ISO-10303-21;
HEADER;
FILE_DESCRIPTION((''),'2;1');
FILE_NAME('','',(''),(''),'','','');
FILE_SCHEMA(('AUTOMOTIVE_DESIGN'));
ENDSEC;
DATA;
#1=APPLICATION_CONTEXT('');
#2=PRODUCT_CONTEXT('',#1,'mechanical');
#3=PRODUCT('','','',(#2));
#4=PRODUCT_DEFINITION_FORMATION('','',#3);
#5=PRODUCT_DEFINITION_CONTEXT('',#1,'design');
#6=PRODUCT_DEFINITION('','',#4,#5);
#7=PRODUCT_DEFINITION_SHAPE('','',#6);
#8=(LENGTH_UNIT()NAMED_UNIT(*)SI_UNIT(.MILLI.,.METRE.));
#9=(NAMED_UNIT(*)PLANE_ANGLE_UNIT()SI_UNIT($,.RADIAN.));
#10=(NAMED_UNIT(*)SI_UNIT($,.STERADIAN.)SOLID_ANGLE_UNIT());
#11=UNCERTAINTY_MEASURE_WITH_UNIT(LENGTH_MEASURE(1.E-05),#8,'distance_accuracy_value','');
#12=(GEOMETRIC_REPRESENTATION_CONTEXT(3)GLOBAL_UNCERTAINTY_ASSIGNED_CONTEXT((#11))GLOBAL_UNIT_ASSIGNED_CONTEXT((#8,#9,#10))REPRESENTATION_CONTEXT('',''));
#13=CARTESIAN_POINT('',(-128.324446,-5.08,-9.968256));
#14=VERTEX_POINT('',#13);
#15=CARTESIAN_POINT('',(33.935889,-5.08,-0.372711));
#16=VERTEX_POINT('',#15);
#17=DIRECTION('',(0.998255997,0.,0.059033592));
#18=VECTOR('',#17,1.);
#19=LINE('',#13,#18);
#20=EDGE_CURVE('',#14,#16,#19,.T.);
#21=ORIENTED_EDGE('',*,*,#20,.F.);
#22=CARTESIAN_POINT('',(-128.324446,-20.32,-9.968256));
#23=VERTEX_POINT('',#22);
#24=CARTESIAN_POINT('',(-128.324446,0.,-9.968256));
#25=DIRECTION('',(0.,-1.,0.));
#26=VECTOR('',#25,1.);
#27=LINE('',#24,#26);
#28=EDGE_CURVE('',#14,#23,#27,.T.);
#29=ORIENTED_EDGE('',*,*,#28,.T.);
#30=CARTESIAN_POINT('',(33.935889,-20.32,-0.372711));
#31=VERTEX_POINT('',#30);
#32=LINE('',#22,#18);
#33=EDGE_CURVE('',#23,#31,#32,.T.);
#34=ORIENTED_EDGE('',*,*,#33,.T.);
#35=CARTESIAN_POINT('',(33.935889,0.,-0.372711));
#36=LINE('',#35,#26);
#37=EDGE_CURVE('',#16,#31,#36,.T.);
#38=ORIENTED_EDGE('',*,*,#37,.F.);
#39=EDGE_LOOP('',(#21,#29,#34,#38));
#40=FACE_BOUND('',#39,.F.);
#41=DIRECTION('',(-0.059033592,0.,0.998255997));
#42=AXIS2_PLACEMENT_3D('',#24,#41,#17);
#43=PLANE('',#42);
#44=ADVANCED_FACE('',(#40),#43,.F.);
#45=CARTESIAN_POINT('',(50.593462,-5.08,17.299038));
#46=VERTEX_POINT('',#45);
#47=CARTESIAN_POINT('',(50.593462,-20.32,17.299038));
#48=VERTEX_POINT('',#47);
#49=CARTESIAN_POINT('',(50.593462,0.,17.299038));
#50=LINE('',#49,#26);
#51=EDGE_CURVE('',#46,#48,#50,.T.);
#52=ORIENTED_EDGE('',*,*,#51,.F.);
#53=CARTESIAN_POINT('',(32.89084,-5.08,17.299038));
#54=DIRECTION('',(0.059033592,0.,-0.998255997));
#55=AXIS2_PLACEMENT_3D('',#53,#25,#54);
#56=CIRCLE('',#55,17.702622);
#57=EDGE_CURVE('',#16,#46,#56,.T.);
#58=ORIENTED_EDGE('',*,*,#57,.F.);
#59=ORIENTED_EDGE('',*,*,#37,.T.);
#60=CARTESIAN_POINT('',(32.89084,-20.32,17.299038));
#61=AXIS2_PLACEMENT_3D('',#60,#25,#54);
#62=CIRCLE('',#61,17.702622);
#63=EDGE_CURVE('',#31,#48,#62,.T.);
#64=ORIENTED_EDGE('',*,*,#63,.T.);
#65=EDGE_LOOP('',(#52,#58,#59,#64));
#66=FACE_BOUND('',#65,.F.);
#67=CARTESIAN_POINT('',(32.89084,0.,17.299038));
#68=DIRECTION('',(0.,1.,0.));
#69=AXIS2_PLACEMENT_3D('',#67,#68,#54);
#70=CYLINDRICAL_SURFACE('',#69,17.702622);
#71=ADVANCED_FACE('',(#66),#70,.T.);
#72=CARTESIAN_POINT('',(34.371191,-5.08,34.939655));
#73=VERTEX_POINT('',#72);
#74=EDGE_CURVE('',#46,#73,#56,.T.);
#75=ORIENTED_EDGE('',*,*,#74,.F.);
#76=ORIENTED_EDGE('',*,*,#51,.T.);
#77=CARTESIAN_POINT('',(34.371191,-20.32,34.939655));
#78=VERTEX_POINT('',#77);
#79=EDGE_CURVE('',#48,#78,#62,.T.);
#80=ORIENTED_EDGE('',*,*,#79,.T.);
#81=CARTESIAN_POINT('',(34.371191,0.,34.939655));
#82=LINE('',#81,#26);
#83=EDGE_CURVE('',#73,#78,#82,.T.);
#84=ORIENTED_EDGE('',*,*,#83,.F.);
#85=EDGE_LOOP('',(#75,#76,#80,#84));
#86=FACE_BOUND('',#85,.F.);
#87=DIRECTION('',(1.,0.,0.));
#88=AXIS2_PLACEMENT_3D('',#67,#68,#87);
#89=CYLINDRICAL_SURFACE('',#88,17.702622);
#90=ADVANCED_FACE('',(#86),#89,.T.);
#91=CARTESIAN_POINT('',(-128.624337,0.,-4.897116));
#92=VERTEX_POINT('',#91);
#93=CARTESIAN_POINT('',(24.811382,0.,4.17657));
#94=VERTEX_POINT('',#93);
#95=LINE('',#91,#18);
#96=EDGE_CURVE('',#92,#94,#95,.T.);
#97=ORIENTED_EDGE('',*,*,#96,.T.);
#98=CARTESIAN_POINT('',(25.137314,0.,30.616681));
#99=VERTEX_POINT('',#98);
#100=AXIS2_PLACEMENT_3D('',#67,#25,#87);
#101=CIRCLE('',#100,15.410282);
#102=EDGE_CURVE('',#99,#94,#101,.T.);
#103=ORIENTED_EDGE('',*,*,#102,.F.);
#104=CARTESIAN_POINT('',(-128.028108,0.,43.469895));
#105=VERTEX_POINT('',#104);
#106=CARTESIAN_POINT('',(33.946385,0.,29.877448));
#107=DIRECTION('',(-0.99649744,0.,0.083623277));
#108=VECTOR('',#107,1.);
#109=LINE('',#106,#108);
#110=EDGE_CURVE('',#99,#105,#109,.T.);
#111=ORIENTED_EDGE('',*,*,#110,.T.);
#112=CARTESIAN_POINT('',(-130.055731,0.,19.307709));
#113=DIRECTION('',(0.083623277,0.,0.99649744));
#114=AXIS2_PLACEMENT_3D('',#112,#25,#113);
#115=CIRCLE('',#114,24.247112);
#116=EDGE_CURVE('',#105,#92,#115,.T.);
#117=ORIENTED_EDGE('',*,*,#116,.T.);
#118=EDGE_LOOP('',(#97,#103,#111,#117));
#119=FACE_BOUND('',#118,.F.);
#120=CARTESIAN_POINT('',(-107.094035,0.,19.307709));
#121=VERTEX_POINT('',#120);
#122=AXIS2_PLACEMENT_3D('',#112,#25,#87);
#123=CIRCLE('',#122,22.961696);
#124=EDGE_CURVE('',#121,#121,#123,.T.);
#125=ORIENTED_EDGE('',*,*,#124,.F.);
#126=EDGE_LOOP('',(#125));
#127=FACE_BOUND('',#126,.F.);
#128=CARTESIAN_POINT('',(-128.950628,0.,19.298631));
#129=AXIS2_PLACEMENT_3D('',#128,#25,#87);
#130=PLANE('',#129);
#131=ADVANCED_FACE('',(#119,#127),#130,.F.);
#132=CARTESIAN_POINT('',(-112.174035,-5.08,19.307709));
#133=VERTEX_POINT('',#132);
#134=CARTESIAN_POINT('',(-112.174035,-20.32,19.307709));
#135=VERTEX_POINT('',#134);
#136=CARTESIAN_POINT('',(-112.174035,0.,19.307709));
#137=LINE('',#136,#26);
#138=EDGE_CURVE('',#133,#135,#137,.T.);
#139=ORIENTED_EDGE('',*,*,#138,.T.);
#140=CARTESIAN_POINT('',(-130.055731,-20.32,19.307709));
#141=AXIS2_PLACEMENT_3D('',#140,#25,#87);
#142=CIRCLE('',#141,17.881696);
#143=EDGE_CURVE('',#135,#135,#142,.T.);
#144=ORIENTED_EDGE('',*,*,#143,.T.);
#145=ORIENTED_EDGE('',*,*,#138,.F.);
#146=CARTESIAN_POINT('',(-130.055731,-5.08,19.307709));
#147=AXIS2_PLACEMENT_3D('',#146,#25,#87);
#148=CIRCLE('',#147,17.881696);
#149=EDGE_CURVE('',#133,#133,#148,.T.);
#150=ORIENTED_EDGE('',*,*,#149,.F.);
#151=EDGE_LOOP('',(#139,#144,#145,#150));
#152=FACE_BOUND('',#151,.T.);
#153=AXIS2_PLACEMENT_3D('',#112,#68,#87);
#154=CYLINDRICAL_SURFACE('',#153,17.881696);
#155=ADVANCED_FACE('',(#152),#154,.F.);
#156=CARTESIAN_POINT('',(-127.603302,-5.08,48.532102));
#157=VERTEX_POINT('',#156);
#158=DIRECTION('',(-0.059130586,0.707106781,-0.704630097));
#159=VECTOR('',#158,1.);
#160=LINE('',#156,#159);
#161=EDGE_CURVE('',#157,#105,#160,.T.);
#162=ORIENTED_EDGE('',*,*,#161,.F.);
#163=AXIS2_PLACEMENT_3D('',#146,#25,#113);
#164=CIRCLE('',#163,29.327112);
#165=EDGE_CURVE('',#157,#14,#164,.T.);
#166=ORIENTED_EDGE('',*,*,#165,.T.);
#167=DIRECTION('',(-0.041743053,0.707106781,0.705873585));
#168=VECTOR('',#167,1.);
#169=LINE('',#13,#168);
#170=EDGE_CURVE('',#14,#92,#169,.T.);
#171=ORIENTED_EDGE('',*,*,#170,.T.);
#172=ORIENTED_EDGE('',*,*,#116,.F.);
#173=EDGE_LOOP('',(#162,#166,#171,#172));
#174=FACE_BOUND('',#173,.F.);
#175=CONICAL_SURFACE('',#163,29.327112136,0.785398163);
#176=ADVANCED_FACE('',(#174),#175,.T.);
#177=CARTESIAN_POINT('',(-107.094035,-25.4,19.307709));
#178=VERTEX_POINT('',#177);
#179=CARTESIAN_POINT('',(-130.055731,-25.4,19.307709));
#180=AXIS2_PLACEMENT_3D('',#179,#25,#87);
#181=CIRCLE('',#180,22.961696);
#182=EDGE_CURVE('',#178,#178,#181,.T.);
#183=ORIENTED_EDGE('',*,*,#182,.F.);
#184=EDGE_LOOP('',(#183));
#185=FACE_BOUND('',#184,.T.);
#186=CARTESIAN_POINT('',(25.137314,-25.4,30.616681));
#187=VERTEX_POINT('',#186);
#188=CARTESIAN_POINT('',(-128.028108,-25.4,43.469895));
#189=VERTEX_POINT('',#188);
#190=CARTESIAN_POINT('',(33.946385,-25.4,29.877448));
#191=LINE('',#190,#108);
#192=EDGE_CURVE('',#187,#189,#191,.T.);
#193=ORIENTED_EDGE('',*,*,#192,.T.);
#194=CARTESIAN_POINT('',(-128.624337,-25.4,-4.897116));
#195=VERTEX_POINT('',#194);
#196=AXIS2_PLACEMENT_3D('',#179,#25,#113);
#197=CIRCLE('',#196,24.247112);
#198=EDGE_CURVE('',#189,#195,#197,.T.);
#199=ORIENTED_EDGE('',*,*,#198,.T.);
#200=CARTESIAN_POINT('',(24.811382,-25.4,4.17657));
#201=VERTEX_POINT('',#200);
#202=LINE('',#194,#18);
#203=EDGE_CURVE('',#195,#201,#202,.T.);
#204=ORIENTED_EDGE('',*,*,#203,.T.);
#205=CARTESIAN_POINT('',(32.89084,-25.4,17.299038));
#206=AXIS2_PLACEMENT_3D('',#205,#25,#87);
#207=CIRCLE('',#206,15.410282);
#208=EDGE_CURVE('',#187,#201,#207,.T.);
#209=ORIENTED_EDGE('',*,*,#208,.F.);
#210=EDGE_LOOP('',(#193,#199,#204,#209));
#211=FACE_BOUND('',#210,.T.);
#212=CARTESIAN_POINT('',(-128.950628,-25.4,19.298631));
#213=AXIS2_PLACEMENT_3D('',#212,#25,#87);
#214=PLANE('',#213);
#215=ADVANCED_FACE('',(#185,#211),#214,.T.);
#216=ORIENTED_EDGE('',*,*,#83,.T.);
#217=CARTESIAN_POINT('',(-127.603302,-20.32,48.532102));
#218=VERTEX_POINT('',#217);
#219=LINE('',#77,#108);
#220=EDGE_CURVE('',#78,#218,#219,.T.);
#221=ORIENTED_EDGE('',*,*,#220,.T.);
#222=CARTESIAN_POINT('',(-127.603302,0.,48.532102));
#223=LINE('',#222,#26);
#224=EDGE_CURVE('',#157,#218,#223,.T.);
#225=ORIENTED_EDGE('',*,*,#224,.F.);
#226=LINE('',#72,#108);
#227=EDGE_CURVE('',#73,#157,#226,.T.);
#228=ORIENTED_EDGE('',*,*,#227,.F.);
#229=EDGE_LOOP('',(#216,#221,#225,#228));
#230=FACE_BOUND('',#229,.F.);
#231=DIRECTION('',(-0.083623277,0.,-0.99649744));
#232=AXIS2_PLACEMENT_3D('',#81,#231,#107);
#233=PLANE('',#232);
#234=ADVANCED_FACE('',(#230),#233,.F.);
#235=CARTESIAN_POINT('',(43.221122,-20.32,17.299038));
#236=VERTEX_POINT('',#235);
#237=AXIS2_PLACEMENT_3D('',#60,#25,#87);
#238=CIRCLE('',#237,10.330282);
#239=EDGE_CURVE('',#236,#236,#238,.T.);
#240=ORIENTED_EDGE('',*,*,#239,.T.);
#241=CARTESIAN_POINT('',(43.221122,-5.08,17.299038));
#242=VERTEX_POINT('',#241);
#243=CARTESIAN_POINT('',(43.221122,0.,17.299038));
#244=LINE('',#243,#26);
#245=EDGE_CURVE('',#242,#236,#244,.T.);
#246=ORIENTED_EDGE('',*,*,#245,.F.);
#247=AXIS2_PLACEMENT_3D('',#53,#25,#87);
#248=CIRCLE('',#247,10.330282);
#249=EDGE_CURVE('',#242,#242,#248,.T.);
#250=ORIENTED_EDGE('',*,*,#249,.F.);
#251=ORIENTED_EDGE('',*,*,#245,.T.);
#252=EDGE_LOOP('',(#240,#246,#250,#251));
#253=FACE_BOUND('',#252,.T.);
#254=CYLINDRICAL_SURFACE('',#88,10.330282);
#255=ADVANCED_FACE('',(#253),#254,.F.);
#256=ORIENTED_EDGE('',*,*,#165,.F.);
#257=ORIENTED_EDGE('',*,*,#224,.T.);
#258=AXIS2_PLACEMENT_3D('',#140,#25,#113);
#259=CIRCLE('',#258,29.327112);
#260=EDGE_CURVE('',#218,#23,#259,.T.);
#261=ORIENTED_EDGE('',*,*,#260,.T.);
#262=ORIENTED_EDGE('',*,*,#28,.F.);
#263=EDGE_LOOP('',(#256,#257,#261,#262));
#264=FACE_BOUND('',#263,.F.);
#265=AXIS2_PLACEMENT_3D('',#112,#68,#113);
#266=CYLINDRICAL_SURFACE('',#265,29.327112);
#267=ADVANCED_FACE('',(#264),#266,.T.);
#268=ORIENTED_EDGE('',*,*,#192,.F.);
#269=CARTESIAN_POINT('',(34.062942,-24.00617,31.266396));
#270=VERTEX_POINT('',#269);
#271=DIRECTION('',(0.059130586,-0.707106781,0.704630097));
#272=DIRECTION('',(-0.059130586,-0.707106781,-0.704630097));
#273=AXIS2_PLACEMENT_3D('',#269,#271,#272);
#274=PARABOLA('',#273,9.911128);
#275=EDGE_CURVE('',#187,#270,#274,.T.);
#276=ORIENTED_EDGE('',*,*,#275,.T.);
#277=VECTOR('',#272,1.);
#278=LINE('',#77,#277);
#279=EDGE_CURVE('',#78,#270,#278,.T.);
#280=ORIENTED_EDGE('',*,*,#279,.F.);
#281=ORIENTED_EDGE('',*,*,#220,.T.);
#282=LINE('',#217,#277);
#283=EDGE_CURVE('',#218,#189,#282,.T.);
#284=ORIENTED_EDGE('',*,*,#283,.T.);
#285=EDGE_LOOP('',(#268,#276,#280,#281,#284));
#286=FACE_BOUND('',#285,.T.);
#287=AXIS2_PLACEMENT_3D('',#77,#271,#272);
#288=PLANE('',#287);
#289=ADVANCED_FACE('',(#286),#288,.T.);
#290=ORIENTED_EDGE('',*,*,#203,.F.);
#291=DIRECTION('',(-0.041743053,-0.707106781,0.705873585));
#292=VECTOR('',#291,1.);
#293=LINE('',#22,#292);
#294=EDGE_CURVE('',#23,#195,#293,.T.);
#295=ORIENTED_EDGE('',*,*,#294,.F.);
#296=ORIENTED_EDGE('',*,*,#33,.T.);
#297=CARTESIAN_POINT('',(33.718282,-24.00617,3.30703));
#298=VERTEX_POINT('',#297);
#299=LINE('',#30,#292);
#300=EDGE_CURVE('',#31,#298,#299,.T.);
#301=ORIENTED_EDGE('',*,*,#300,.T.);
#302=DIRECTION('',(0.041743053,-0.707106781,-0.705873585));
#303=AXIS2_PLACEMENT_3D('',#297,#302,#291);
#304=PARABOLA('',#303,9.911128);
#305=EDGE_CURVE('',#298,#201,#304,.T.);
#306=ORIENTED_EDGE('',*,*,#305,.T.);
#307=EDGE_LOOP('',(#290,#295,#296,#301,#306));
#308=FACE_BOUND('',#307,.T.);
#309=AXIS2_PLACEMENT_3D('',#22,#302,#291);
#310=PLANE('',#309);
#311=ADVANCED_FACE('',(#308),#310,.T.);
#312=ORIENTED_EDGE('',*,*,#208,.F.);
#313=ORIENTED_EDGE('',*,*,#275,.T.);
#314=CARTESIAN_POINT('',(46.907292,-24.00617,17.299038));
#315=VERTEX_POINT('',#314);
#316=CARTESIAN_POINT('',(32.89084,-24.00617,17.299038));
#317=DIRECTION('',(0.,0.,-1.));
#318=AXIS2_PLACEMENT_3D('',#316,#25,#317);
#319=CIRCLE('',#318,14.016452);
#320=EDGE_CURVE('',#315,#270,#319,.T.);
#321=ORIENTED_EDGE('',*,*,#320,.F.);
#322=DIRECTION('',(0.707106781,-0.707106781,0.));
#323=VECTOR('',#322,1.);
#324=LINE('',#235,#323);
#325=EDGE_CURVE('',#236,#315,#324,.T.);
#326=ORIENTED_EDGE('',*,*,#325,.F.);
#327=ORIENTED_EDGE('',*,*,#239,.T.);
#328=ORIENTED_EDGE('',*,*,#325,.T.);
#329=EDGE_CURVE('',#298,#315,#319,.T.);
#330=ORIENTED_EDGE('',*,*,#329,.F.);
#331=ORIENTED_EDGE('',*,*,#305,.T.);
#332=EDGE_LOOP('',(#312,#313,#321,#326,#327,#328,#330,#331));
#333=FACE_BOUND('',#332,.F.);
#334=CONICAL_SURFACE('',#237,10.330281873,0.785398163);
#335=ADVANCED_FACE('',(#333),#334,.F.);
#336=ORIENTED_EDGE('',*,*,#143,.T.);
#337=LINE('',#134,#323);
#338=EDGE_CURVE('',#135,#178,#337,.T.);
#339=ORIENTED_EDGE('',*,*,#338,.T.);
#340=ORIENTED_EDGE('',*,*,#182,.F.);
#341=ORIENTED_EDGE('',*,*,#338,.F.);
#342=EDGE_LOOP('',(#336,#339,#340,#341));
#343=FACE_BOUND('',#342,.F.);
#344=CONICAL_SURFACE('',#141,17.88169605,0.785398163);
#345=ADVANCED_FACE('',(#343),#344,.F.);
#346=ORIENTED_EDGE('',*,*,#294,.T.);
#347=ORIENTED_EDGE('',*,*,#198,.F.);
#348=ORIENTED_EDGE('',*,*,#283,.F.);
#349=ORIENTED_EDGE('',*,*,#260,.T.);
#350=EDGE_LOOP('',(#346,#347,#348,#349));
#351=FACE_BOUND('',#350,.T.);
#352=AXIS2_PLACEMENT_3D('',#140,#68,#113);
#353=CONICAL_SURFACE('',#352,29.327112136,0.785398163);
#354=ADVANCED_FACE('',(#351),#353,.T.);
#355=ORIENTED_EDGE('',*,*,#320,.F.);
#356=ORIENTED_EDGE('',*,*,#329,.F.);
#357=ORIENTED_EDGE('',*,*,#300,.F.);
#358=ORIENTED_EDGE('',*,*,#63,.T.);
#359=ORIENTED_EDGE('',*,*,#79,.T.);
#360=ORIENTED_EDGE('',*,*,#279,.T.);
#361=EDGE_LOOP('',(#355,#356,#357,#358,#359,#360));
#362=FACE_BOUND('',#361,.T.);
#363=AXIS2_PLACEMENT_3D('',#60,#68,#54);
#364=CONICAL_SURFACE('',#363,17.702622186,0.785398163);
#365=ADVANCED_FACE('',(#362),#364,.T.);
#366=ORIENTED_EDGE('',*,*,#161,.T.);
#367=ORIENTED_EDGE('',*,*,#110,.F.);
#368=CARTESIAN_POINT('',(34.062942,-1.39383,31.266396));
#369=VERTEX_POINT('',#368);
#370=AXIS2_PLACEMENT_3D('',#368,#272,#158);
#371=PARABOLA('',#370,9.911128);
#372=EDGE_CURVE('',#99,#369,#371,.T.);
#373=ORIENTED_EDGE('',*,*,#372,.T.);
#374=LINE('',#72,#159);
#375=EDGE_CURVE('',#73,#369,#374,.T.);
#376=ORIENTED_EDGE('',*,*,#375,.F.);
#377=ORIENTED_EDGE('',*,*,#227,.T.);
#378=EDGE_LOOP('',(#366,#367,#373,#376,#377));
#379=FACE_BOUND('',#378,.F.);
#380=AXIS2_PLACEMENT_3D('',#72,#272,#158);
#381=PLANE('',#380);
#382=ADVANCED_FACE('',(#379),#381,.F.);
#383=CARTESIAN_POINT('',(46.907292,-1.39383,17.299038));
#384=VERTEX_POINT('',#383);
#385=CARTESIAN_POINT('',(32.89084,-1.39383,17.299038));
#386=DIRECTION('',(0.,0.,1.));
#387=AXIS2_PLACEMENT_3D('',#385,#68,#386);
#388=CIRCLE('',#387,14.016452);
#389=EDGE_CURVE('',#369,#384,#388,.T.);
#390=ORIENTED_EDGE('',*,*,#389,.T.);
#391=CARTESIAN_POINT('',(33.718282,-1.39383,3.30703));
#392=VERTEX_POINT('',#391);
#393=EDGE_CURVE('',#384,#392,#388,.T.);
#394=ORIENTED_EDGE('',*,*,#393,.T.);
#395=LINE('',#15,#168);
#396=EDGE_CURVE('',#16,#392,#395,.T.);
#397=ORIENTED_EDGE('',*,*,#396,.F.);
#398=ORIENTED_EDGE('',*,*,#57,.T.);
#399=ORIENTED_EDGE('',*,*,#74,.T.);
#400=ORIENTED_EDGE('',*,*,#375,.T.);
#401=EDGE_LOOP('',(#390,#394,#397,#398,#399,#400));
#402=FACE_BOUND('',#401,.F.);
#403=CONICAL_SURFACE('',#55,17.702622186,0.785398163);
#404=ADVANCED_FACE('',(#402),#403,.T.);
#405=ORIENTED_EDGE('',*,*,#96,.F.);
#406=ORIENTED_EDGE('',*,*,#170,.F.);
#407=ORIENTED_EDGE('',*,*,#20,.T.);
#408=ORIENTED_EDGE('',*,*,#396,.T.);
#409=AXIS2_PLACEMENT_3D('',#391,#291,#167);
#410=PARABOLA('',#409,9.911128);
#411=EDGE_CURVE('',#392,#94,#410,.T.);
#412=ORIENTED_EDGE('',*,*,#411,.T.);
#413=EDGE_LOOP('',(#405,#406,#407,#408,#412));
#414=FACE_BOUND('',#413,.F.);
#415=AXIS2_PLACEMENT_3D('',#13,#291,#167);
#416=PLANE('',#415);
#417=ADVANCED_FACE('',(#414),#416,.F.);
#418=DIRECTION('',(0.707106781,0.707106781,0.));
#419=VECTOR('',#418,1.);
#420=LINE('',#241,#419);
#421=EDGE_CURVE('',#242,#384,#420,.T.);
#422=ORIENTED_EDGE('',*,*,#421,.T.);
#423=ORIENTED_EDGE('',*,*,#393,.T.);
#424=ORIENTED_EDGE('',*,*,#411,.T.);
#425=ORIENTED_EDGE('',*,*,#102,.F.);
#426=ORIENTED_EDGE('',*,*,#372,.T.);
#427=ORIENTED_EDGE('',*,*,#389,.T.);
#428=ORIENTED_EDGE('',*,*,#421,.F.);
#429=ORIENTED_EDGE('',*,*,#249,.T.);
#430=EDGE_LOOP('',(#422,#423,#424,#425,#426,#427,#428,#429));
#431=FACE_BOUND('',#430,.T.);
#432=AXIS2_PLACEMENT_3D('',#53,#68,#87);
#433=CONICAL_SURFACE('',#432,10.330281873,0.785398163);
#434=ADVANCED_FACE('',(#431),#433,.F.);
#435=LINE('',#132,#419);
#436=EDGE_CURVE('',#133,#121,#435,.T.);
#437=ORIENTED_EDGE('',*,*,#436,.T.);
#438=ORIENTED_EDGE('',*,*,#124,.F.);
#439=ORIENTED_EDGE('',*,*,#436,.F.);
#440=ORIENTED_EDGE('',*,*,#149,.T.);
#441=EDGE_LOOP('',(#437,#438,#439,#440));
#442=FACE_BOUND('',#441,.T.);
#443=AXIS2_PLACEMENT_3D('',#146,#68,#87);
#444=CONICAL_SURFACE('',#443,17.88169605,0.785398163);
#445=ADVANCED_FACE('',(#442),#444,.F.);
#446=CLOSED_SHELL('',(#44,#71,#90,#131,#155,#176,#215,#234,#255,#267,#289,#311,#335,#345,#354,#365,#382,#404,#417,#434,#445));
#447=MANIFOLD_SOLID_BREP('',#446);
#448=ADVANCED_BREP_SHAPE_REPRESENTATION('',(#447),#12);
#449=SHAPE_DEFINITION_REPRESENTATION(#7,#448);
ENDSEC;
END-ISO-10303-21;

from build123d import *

# Parameters (mm, degrees)
F0_R         = 17.8816960504
F0_R_2       = 10.3302818728
F1_DEPTH     = 25.4
F2_T1_DEPTH  = 162.5438125483
F2_T3_DEPTH  = 162.5438125483
F2_T6_ANGLE  = 188.1812058846
F2_T8_ANGLE  = 171.8187941154
F2_T10_ANGLE = 188.1812058846
F2_T12_ANGLE = 171.8187941154


# Not quite as in the source:
# - a fillet or chamfer that OpenCascade refuses, or shapes differently, is made with other operations: its cross-section is extruded or revolved along the edge and cut away or added


with BuildPart() as f1:
    # F0 (on Front) → F1 (new body)
    with BuildSketch(Plane.XZ):
        with BuildLine():
            ThreePointArc((-128.3244462029, -9.9682561267), (-108.7150059464, -0.8082782893), (-100.7286188282, 19.3077094309))
            ThreePointArc((-100.7286188282, 19.3077094309), (-108.4686726557, 39.1591179408), (-127.6033017493, 48.5321015922))
            ThreePointArc((-127.6033017493, 48.5321015922), (-159.38061509, 19.669202563), (-128.3244462029, -9.9682561267))
        make_face()
        with Locations((-130.0557309645, 19.3077094309)):
            Circle(F0_R, mode=Mode.SUBTRACT)
        with BuildLine():
            ThreePointArc((-127.6033017493, 48.5321015922), (-108.4686726557, 39.1591179408), (-100.7286188282, 19.3077094309))
            ThreePointArc((-100.7286188282, 19.3077094309), (-108.7150059464, -0.8082782893), (-128.3244462029, -9.9682561267))
            Line((-128.3244462029, -9.9682561267), (33.9358894089, -0.3727110744))
            ThreePointArc((33.9358894089, -0.3727110744), (15.1895627408, 17.5172445164), (34.3711913147, 34.9396553669))
            Line((34.3711913147, 34.9396553669), (-127.6033017493, 48.5321015922))
        make_face()
        with BuildLine():
            ThreePointArc((50.5934622257, 17.2990376807), (45.9213605892, 29.2818740087), (34.3711913147, 34.9396553669))
            ThreePointArc((34.3711913147, 34.9396553669), (15.1895627408, 17.5172445164), (33.9358894089, -0.3727110744))
            ThreePointArc((33.9358894089, -0.3727110744), (45.772667286, 5.1564943288), (50.5934622257, 17.2990376807))
        make_face()
        with Locations((32.89084004, 17.2990376807)):
            Circle(F0_R_2, mode=Mode.SUBTRACT)
    extrude(amount=F1_DEPTH)

    # F2: chamfer of 5.08 on 12 edges, made by hand

    # F2_s2 → F2_t1 (cut)
    with BuildSketch(Plane(origin=(31.219303845, 0, -2.6198366217), x_dir=(0, 1, 0), z_dir=(-0.9964974398, 0, 0.0836232768))):
        Polygon((-20.32, -37.691508766), (-25.4, -32.611508766), (-25.4, -37.691508766), align=None)
        Polygon((-5.08, -37.691508766), (0, -32.611508766), (0, -37.691508766), align=None)
    extrude(amount=F2_T1_DEPTH, mode=Mode.SUBTRACT)

    # F2_s4 → F2_t3 (cut)
    with BuildSketch(Plane(origin=(-128.4646756887, 0, -7.5969803622), x_dir=(0, 1, 0), z_dir=(0.9982559968, 0, 0.0590335916))):
        Polygon((-20.32, -2.3754185022), (-25.4, 2.7045814978), (-25.4, -2.3754185022), align=None)
        Polygon((-5.08, -2.3754185022), (0, 2.7045814978), (0, -2.3754185022), align=None)
    extrude(amount=F2_T3_DEPTH, mode=Mode.SUBTRACT)

    # F2_s5 → F2_t6 (revolve, cut)
    with BuildSketch(Plane(origin=(-130.755189219, 0, 10.9726096036), x_dir=(0, 1, 0), z_dir=(0.9964974398, 0, -0.0836232768))):
        Polygon((-20.32, 37.691508766), (-25.4, 32.611508766), (-25.4, 37.691508766), align=None)
    revolve(axis=Axis((-130.0557309645, -25.4, 19.3077094309), (0, -1, 0)), revolution_arc=F2_T6_ANGLE, mode=Mode.SUBTRACT)

    # F2_s7 → F2_t8 (revolve, cut)
    with BuildSketch(Plane(origin=(33.7956599231, 0, 1.9985646901), x_dir=(0, 1, 0), z_dir=(-0.9982559968, 0, -0.0590335916))):
        Polygon((-20.32, 2.3754185022), (-25.4, -2.7045814978), (-25.4, 2.3754185022), align=None)
    revolve(axis=Axis((32.89084004, -25.4, 17.2990376807), (0, -1, 0)), revolution_arc=F2_T8_ANGLE, mode=Mode.SUBTRACT)

    # F2_s9 → F2_t10 (revolve, cut)
    with BuildSketch(Plane(origin=(-130.755189219, 0, 10.9726096036), x_dir=(0, 1, 0), z_dir=(0.9964974398, 0, -0.0836232768))):
        Polygon((-5.08, 37.691508766), (0, 32.611508766), (0, 37.691508766), align=None)
    revolve(axis=Axis((-130.0557309645, 0, 19.3077094309), (0, -1, 0)), revolution_arc=F2_T10_ANGLE, mode=Mode.SUBTRACT)

    # F2_s11 → F2_t12 (revolve, cut)
    with BuildSketch(Plane(origin=(33.7956599231, 0, 1.9985646901), x_dir=(0, 1, 0), z_dir=(-0.9982559968, 0, -0.0590335916))):
        Polygon((-5.08, 2.3754185022), (0, -2.7045814978), (0, 2.3754185022), align=None)
    revolve(axis=Axis((32.89084004, 0, 17.2990376807), (0, -1, 0)), revolution_arc=F2_T12_ANGLE, mode=Mode.SUBTRACT)

    # F2_s13 → F2_t14 (revolve, cut)
    with BuildSketch(Plane.XY.offset(19.3077094309)):
        Polygon((-112.1740349142, -5.08), (-107.0940349142, 0), (-112.1740349142, 0), align=None)
    revolve(axis=Axis((-130.0557309645, 0, 19.3077094309), (0, -1, 0)), mode=Mode.SUBTRACT)

    # F2_s15 → F2_t16 (revolve, cut)
    with BuildSketch(Plane.XY.offset(19.3077094309)):
        Polygon((-112.1740349142, -20.32), (-107.0940349142, -25.4), (-112.1740349142, -25.4), align=None)
    revolve(axis=Axis((-130.0557309645, -25.4, 19.3077094309), (0, -1, 0)), mode=Mode.SUBTRACT)

    # F2_s17 → F2_t18 (revolve, cut)
    with BuildSketch(Plane.XY.offset(17.2990376807)):
        Polygon((43.2211219128, -20.32), (48.3011219128, -25.4), (43.2211219128, -25.4), align=None)
    revolve(axis=Axis((32.89084004, -25.4, 17.2990376807), (0, -1, 0)), mode=Mode.SUBTRACT)

    # F2_s19 → F2_t20 (revolve, cut)
    with BuildSketch(Plane.XY.offset(17.2990376807)):
        Polygon((43.2211219128, -5.08), (48.3011219128, 0), (43.2211219128, 0), align=None)
    revolve(axis=Axis((32.89084004, 0, 17.2990376807), (0, -1, 0)), mode=Mode.SUBTRACT)


solid = f1.part
